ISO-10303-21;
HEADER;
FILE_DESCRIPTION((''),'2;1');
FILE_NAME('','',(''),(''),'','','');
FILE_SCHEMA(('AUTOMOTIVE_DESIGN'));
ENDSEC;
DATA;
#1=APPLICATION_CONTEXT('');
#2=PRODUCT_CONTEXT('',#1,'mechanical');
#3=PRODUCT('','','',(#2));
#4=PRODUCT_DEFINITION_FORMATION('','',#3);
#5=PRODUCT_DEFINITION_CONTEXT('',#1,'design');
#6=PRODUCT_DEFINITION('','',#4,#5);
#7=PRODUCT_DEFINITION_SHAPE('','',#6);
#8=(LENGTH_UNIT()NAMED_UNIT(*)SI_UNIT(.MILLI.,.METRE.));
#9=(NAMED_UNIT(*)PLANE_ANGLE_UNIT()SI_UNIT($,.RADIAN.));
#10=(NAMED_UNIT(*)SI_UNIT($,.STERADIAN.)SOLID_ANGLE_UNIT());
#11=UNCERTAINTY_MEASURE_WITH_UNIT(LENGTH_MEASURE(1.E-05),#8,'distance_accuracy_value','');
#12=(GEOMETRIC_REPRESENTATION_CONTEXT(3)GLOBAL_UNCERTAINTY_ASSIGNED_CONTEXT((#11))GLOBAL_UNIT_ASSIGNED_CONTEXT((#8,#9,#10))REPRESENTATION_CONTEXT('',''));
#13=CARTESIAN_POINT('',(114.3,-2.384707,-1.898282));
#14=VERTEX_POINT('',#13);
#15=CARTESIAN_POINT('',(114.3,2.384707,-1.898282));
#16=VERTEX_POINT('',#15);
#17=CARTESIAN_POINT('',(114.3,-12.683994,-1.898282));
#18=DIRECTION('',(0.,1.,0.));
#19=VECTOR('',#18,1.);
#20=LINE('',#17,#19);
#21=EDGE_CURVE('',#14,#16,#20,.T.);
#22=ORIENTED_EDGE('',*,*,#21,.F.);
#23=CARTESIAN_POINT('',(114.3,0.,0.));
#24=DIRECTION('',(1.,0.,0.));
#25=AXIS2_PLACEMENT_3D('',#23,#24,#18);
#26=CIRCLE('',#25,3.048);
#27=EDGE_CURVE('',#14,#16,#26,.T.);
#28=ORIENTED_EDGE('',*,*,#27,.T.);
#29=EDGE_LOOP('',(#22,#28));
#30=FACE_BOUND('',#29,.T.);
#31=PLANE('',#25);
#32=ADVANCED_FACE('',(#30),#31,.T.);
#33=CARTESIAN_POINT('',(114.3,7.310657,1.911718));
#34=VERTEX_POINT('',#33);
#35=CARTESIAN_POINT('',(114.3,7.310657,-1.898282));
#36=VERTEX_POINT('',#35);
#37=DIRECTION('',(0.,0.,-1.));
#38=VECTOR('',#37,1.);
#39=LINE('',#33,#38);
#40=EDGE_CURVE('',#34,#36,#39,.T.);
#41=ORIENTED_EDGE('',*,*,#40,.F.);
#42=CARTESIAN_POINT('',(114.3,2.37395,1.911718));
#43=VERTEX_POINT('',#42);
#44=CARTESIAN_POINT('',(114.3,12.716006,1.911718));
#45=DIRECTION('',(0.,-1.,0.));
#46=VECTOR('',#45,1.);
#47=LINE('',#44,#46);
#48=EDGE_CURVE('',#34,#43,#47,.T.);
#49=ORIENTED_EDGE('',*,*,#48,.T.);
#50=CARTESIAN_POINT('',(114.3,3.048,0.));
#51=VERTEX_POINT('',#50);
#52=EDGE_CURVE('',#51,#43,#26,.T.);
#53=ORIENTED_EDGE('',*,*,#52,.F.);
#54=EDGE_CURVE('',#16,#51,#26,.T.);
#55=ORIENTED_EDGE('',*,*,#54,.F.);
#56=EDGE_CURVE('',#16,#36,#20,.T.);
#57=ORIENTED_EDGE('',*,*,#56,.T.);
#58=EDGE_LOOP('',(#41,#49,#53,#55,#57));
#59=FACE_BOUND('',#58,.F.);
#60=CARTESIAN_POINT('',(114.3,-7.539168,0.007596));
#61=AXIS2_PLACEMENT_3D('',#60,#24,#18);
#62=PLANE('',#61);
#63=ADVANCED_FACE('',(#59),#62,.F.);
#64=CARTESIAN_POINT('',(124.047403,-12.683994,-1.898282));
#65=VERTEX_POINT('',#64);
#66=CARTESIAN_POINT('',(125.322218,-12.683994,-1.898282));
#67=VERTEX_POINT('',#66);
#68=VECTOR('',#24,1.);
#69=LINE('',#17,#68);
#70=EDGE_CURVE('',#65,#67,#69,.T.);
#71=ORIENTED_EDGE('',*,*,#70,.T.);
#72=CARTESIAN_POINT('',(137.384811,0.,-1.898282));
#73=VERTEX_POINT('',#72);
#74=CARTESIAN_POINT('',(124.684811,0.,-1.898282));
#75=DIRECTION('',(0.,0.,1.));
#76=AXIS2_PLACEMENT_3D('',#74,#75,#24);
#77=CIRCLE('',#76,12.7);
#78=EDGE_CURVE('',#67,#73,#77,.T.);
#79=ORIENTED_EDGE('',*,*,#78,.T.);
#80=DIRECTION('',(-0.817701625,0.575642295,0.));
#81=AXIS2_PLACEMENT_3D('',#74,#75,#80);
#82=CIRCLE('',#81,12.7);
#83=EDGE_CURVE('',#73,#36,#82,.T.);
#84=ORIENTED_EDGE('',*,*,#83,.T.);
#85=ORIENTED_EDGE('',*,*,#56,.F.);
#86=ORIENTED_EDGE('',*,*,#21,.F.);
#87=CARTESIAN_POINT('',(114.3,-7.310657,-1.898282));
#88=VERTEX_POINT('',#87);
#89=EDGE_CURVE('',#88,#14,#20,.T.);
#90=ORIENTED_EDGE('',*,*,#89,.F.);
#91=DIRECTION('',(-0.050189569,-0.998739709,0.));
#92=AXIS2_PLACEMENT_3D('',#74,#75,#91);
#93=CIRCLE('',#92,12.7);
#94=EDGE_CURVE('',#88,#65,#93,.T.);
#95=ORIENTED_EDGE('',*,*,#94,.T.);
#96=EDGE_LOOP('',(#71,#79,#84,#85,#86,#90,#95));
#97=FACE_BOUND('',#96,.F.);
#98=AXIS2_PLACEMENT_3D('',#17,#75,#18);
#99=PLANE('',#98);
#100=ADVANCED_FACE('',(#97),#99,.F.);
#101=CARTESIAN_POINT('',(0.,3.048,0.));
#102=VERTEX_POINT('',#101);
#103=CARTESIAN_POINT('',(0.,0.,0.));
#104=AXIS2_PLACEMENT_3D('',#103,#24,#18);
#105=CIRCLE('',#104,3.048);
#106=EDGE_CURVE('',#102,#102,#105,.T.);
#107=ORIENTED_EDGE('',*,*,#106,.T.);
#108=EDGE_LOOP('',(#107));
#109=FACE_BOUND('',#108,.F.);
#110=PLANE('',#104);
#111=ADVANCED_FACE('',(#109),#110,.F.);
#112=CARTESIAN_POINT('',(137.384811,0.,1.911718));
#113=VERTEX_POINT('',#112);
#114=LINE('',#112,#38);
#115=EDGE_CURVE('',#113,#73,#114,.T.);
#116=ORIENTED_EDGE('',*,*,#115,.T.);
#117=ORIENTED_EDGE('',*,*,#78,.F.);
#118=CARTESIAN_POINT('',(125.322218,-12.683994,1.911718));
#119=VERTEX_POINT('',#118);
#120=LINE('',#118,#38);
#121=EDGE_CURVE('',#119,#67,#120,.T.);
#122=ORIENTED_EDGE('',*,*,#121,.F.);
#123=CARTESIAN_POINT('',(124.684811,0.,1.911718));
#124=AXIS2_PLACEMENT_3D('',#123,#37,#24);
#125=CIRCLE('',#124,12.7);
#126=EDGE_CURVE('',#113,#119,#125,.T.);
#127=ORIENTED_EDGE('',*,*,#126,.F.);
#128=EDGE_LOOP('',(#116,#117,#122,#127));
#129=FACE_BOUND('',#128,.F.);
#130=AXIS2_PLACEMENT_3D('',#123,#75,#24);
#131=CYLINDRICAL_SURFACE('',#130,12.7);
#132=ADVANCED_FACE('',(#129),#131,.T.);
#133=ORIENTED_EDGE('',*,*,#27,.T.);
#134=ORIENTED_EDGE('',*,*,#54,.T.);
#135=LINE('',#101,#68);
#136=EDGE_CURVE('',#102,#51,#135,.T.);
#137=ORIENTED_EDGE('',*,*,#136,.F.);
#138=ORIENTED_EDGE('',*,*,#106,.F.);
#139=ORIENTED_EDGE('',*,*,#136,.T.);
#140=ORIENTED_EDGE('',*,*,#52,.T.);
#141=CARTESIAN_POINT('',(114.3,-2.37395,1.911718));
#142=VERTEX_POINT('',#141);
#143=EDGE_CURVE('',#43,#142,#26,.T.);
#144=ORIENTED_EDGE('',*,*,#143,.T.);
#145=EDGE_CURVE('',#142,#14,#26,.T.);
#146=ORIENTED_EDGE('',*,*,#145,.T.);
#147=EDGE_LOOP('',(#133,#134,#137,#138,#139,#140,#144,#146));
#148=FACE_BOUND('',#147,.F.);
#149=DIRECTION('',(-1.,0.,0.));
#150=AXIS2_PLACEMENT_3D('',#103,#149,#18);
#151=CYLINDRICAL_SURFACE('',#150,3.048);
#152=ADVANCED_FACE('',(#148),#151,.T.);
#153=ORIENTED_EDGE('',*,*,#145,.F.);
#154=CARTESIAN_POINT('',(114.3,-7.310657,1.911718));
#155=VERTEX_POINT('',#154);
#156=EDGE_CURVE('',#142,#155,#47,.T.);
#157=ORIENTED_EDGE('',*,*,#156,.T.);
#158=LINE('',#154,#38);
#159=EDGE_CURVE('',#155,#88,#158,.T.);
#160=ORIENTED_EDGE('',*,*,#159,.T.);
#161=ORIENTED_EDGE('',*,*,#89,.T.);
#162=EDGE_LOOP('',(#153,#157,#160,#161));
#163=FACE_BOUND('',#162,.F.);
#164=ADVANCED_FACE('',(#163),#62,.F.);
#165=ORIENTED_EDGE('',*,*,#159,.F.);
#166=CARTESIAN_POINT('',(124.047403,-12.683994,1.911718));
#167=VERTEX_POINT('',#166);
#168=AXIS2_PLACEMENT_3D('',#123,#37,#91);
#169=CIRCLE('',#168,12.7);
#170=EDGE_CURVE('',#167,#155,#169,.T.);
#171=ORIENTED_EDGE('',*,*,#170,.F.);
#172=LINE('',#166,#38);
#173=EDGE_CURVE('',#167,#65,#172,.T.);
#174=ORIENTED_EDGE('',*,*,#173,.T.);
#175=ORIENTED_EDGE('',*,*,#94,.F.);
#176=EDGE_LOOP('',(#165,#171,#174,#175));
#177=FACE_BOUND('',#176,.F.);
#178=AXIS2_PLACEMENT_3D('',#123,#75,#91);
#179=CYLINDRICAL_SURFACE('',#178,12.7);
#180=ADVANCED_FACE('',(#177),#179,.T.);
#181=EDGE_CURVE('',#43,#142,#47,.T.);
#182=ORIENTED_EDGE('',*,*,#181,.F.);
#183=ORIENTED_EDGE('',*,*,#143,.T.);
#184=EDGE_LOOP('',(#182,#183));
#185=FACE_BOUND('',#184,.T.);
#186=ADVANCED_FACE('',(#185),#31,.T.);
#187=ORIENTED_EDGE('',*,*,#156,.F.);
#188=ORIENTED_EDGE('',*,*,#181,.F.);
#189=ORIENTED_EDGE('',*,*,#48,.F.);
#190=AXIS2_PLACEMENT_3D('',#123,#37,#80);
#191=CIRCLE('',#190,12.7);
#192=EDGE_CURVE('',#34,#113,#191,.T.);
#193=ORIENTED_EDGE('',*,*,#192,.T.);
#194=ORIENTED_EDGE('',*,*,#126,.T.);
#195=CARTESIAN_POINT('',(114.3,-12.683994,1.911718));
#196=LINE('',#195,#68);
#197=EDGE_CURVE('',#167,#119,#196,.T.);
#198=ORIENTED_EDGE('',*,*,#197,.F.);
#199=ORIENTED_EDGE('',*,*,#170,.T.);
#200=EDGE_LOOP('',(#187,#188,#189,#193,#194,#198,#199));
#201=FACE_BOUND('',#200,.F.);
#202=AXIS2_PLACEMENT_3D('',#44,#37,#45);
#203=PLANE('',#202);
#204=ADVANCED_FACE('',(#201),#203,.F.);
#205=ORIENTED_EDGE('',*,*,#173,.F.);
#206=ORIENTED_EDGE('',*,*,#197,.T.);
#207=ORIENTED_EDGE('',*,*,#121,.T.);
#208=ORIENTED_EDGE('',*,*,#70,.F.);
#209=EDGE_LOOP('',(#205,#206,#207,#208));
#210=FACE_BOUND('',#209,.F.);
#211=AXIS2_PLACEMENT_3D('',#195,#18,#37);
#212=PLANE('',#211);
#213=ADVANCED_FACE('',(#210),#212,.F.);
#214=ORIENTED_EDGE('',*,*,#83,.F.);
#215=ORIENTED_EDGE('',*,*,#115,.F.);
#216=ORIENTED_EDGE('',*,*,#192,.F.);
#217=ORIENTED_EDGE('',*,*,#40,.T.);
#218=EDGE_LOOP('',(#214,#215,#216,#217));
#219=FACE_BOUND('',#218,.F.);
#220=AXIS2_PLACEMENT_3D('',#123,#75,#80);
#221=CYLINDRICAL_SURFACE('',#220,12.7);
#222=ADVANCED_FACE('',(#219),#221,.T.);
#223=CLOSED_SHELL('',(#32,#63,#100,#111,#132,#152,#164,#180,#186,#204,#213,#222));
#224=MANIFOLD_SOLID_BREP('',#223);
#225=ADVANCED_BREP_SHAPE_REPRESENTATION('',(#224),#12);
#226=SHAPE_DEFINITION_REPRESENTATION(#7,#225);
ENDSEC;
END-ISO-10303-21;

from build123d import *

# Parameters (mm, degrees)
F0_R     = 3.048
F1_DEPTH = 114.3
F3_DEPTH = 25.4
F5_DEPTH = 25.4


with BuildPart() as f1:
    # F0 (on Right) → F1 (new body)
    with BuildSketch(Plane.YZ):
        Circle(F0_R)
    extrude(amount=F1_DEPTH)

    # F2 (on face) → F3 (join)
    with BuildSketch(Plane.YZ.offset(114.3)):
        with BuildLine():
            Line((-12.6839943098, -1.8982821818), (-2.3847072689, -1.8982821818))
            ThreePointArc((-2.3847072689, -1.8982821818), (-3.0479878513, 0.0086057166), (-2.3739500803, 1.9117178182))
            Line((-2.3739500803, 1.9117178182), (-12.6839943098, 1.9117178182))
            Line((-12.6839943098, 1.9117178182), (-12.6839943098, -1.8982821818))
        make_face()
        with BuildLine():
            Line((-2.3847072689, -1.8982821818), (2.3847072689, -1.8982821818))
            ThreePointArc((2.3847072689, -1.8982821818), (2.877402627, -1.0054144032), (3.048, 0))
            ThreePointArc((3.048, 0), (2.8745524734, 1.0135344482), (2.3739500803, 1.9117178182))
            Line((2.3739500803, 1.9117178182), (-2.3739500803, 1.9117178182))
            ThreePointArc((-2.3739500803, 1.9117178182), (-3.0479878513, 0.0086057166), (-2.3847072689, -1.8982821818))
        make_face()
        with BuildLine():
            Line((2.3847072689, -1.8982821818), (12.7160056902, -1.8982821818))
            Line((12.7160056902, -1.8982821818), (12.7160056902, 1.9117178182))
            Line((12.7160056902, 1.9117178182), (2.3739500803, 1.9117178182))
            ThreePointArc((2.3739500803, 1.9117178182), (2.8745524734, 1.0135344482), (3.048, 0))
            ThreePointArc((3.048, 0), (2.877402627, -1.0054144032), (2.3847072689, -1.8982821818))
        make_face()
    extrude(amount=F3_DEPTH)

    # F4 (on face) → F5 (cut)
    with BuildSketch(Plane.XY.offset(1.9117178182)):
        with BuildLine():
            ThreePointArc((114.3, 7.3106571527), (128.51905795, 12.1073757501), (137.3848106384, 0))
            ThreePointArc((137.3848106384, 0), (133.8876655087, -8.751997614), (125.3222181603, -12.6839943098))
            Line((125.3222181603, -12.6839943098), (139.7, -12.6839943098))
            Line((139.7, -12.6839943098), (139.7, 12.7160056902))
            Line((139.7, 12.7160056902), (114.3, 12.7160056902))
            Line((114.3, 12.7160056902), (114.3, 7.3106571527))
        make_face()
        with BuildLine():
            ThreePointArc((124.0474031165, -12.6839943098), (118.5537005151, -11.1220271828), (114.3, -7.3106571527))
            Line((114.3, -7.3106571527), (114.3, -12.6839943098))
            Line((114.3, -12.6839943098), (124.0474031165, -12.6839943098))
        make_face()
    extrude(amount=-F5_DEPTH, mode=Mode.SUBTRACT)


solid = f1.part
